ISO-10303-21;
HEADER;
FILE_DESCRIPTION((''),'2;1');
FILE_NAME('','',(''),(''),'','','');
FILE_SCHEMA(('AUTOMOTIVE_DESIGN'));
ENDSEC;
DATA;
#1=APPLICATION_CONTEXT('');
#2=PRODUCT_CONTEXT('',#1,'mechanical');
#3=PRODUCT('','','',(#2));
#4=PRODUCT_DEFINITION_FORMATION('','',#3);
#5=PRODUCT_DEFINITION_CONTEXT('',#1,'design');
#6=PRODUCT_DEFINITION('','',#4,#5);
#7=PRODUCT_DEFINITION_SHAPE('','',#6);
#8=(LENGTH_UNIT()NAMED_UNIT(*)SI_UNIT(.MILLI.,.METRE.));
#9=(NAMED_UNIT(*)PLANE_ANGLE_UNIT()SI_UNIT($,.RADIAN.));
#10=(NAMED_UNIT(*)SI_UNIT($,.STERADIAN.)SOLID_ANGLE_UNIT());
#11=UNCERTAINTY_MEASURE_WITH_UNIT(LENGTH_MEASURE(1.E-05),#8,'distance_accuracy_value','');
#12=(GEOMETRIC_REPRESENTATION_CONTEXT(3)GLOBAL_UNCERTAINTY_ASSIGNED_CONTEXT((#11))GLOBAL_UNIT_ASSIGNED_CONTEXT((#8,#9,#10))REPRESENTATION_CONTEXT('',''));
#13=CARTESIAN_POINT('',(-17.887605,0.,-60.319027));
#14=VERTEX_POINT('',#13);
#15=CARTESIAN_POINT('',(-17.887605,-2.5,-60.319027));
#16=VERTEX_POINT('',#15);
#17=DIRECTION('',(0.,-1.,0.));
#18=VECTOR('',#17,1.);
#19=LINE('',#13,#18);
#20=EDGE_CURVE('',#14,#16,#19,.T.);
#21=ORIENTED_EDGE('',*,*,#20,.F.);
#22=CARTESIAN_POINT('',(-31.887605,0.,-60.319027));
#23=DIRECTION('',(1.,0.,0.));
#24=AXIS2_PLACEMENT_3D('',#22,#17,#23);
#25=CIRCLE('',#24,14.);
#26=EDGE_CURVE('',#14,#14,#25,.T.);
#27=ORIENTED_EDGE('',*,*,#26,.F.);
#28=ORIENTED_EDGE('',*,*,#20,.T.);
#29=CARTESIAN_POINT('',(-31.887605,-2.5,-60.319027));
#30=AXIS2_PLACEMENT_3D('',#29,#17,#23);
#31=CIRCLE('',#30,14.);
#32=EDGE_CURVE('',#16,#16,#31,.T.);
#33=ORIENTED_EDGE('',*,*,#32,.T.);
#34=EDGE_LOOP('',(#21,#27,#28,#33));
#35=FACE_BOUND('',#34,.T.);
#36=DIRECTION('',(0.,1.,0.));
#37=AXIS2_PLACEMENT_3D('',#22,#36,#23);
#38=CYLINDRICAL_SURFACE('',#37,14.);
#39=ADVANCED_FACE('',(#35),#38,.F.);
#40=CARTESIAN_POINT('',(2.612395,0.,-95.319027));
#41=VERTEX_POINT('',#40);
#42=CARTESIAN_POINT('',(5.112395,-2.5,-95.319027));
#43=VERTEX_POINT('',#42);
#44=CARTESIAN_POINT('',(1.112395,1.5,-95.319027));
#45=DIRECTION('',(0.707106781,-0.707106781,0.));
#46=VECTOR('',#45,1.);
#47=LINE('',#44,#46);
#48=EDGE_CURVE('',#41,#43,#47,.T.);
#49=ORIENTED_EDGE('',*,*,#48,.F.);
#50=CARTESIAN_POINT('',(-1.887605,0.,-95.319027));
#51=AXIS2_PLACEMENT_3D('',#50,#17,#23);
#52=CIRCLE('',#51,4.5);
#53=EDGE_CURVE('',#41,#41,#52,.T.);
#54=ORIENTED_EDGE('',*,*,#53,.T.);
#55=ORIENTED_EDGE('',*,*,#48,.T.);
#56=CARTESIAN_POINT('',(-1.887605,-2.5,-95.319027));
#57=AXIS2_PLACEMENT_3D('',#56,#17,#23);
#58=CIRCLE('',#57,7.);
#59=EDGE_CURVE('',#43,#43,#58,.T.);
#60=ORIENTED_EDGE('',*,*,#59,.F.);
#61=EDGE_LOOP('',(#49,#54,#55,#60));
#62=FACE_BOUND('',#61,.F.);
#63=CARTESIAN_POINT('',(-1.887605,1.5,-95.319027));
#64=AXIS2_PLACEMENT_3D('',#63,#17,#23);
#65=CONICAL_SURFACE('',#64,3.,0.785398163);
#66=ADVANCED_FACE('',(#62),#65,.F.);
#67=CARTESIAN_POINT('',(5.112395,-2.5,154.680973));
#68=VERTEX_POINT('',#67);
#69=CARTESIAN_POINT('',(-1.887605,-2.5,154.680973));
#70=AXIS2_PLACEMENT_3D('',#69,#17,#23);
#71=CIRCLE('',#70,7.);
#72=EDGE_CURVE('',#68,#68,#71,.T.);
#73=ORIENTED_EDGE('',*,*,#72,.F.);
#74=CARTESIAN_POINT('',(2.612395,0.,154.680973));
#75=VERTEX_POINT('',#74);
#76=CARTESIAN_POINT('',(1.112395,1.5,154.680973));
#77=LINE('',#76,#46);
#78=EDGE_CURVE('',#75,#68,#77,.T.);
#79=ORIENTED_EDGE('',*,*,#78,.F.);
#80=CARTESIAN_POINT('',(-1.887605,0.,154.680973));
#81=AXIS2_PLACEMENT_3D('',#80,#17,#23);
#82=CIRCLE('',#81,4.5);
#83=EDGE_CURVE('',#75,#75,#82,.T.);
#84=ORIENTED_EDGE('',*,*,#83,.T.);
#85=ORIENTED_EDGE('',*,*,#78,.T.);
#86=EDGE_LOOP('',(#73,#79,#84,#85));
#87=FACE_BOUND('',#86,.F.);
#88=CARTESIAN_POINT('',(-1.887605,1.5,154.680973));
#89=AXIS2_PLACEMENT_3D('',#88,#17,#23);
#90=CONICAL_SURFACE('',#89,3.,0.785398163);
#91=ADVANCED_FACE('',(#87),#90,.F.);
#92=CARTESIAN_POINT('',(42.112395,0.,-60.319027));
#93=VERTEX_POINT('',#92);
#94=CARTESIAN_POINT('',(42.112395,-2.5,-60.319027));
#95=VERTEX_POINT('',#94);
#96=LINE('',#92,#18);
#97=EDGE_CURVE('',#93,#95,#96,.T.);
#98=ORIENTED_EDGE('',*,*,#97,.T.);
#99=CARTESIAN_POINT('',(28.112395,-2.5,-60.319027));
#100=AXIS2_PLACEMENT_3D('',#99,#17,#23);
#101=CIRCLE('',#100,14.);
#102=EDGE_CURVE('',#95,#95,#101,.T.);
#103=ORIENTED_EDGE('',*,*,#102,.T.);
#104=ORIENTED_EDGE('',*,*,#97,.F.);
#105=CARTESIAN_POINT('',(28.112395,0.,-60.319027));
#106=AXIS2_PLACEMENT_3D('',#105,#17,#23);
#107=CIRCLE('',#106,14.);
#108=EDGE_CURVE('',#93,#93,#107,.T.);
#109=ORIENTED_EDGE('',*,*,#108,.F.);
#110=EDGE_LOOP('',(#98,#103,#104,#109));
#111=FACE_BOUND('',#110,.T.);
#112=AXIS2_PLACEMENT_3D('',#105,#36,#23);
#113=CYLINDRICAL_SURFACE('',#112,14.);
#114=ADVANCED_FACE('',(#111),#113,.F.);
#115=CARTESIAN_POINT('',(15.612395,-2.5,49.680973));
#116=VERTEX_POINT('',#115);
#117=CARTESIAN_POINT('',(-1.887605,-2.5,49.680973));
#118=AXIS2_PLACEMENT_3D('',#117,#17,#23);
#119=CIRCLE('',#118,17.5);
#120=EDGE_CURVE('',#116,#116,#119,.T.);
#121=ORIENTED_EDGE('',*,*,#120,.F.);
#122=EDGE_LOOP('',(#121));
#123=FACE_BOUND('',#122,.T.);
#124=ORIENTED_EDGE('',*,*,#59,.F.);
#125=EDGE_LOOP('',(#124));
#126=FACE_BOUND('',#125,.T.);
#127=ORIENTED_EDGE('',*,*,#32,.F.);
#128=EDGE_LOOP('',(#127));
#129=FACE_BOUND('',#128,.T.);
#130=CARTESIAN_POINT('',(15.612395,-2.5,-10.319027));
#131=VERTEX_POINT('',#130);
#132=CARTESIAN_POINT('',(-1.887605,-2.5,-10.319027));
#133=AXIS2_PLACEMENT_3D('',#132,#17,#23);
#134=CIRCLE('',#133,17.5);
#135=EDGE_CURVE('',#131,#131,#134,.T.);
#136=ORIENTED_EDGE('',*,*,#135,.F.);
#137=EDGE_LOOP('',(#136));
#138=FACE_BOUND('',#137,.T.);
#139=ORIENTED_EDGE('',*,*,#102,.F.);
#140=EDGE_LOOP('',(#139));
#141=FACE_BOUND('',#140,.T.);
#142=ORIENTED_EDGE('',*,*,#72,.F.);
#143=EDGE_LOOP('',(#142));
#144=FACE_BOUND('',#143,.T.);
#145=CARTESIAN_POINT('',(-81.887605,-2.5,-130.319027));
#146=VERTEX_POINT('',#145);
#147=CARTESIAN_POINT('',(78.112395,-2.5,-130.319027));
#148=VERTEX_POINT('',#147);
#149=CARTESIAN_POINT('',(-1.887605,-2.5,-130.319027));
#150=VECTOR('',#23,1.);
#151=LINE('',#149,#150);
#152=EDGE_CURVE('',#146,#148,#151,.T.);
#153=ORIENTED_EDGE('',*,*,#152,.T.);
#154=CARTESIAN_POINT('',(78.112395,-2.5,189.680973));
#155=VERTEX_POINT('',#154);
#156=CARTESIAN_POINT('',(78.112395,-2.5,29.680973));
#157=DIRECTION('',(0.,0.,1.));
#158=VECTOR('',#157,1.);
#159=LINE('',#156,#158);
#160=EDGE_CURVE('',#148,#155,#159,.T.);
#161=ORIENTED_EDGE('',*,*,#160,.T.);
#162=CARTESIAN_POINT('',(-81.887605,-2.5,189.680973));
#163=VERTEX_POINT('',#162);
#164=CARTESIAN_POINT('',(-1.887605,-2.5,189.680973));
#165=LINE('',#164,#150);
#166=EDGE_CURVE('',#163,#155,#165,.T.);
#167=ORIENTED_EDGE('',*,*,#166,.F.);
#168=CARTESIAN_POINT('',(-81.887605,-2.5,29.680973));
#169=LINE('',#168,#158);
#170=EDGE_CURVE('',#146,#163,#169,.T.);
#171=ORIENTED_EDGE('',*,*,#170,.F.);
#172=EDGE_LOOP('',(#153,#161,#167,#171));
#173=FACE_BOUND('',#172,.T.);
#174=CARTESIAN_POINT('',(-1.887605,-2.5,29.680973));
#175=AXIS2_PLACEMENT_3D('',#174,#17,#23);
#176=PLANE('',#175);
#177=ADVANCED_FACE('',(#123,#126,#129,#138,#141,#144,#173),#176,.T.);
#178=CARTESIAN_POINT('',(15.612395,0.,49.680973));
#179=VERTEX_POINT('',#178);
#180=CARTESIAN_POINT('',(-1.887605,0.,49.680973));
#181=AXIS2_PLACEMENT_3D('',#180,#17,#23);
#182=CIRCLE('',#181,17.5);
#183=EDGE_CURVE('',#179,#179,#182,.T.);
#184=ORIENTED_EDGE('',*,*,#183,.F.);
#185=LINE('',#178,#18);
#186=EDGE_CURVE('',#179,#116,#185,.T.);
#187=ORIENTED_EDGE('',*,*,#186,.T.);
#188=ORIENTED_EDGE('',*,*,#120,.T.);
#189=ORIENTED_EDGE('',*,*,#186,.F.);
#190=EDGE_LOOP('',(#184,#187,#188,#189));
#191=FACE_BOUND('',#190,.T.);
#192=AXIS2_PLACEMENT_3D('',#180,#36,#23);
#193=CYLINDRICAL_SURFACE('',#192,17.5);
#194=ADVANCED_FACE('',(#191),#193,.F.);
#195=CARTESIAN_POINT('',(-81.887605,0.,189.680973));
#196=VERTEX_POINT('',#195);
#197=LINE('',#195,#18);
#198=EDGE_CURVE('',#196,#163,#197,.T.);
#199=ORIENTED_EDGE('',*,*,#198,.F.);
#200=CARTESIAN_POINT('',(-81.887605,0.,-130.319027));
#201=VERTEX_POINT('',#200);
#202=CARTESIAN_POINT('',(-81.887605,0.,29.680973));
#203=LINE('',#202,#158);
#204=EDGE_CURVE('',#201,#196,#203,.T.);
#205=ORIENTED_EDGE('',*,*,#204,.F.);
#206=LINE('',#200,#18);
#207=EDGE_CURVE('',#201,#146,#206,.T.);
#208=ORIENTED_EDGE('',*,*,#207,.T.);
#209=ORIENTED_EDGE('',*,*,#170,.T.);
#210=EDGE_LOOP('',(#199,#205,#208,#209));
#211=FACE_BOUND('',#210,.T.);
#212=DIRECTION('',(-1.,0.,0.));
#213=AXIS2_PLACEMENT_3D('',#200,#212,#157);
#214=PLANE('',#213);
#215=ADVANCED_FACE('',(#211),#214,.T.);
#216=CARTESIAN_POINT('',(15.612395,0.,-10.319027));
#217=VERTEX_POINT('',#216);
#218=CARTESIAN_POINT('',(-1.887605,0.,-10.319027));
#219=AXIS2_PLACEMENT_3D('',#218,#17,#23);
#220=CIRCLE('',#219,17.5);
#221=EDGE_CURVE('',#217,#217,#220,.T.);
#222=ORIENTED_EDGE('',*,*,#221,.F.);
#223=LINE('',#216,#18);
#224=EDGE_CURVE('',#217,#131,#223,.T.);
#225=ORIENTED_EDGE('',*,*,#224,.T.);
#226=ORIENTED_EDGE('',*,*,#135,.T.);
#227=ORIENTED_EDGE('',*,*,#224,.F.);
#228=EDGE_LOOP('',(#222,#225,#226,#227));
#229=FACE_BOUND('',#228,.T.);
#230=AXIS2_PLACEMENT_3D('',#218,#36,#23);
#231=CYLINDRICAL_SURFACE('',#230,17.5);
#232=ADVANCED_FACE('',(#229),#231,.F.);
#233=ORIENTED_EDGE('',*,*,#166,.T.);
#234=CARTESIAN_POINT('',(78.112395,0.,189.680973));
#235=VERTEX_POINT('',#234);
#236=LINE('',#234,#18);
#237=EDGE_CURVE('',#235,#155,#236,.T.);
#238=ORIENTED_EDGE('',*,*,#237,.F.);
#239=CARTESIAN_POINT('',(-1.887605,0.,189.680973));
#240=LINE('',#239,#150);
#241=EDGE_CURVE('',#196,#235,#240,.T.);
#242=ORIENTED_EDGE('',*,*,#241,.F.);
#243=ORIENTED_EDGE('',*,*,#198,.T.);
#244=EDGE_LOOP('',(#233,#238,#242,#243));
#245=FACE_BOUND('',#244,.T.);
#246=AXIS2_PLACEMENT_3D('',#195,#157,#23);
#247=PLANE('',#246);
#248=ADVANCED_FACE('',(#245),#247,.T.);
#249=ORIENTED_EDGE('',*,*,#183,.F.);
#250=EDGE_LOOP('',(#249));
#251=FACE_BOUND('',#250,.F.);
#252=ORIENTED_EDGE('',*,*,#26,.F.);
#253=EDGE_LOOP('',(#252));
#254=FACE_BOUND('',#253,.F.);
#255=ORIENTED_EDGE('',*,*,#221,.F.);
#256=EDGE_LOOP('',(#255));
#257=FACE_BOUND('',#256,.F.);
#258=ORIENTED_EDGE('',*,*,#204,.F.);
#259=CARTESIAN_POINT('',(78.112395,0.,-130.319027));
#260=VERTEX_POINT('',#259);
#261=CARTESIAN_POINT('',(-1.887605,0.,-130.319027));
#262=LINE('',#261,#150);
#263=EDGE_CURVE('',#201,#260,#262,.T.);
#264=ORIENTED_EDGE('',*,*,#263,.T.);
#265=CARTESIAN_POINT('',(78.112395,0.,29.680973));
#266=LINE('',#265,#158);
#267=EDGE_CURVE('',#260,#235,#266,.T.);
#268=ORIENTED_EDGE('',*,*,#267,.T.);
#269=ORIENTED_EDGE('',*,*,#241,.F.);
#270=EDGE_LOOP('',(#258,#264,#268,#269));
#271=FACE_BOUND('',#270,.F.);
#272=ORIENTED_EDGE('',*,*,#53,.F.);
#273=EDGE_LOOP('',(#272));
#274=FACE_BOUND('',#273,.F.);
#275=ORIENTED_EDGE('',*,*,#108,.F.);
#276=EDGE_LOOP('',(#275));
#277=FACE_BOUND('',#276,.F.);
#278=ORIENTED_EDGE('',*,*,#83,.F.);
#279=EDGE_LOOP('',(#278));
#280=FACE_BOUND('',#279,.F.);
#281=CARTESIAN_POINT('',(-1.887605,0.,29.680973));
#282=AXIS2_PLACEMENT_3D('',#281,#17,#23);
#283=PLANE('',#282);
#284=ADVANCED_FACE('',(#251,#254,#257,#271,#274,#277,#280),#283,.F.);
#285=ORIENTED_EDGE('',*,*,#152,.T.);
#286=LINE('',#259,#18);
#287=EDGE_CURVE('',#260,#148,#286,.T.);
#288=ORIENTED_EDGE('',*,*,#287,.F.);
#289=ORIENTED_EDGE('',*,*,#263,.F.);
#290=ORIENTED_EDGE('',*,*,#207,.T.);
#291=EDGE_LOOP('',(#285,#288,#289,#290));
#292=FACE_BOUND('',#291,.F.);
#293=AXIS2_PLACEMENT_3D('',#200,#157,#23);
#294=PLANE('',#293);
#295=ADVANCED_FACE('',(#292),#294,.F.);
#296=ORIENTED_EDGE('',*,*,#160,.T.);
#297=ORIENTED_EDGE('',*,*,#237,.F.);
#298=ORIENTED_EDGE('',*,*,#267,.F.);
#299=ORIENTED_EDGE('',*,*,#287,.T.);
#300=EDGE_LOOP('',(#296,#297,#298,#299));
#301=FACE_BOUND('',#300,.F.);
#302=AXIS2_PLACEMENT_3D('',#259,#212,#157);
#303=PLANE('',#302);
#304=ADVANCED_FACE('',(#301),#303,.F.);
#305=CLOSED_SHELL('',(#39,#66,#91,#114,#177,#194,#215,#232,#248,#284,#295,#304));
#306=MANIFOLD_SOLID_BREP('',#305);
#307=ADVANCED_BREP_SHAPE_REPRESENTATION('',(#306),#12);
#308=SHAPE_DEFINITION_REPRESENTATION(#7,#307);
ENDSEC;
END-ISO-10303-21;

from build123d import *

# Parameters (mm, degrees)
F0_W     = 160
F0_H     = 320
F0_R     = 14
F0_R_2   = 3
F0_R_3   = 17.5
F1_DEPTH = 2.5


# Not quite as in the source:
# - a fillet or chamfer that OpenCascade refuses, or shapes differently, is made with other operations: its cross-section is extruded or revolved along the edge and cut away or added


with BuildPart() as f1:
    # F0 (on Front) → F1 (new body)
    with BuildSketch(Plane.XZ):
        with Locations((-1.8876045942, 29.6809725389)):
            Rectangle(F0_W, F0_H)
        with Locations((-31.8876045942, -60.3190274611)):
            Circle(F0_R, mode=Mode.SUBTRACT)
        with Locations((-1.8876045942, -95.3190274611)):
            Circle(F0_R_2, mode=Mode.SUBTRACT)
        with Locations((28.1123954058, -60.3190274611)):
            Circle(F0_R, mode=Mode.SUBTRACT)
        with Locations((-1.8876045942, -10.3190274611)):
            Circle(F0_R_3, mode=Mode.SUBTRACT)
        with Locations((-1.8876045942, 49.6809725389)):
            Circle(F0_R_3, mode=Mode.SUBTRACT)
        with Locations((-1.8876045942, 154.6809725389)):
            Circle(F0_R_2, mode=Mode.SUBTRACT)
    extrude(amount=F1_DEPTH)

    # F2: chamfer of 4 on 2 edges, made by hand

    # F2_s1 → F2_t2 (revolve, cut)
    with BuildSketch(Plane.XY.offset(154.6809725389)):
        Polygon((1.1123954058, 1.5), (5.1123954058, -2.5), (1.1123954058, -2.5), align=None)
    revolve(axis=Axis((-1.8876045942, -2.5, 154.6809725389), (0, -1, 0)), mode=Mode.SUBTRACT)

    # F2_s3 → F2_t4 (revolve, cut)
    with BuildSketch(Plane.XY.offset(-95.3190274611)):
        Polygon((1.1123954058, 1.5), (5.1123954058, -2.5), (1.1123954058, -2.5), align=None)
    revolve(axis=Axis((-1.8876045942, -2.5, -95.3190274611), (0, -1, 0)), mode=Mode.SUBTRACT)


solid = f1.part
